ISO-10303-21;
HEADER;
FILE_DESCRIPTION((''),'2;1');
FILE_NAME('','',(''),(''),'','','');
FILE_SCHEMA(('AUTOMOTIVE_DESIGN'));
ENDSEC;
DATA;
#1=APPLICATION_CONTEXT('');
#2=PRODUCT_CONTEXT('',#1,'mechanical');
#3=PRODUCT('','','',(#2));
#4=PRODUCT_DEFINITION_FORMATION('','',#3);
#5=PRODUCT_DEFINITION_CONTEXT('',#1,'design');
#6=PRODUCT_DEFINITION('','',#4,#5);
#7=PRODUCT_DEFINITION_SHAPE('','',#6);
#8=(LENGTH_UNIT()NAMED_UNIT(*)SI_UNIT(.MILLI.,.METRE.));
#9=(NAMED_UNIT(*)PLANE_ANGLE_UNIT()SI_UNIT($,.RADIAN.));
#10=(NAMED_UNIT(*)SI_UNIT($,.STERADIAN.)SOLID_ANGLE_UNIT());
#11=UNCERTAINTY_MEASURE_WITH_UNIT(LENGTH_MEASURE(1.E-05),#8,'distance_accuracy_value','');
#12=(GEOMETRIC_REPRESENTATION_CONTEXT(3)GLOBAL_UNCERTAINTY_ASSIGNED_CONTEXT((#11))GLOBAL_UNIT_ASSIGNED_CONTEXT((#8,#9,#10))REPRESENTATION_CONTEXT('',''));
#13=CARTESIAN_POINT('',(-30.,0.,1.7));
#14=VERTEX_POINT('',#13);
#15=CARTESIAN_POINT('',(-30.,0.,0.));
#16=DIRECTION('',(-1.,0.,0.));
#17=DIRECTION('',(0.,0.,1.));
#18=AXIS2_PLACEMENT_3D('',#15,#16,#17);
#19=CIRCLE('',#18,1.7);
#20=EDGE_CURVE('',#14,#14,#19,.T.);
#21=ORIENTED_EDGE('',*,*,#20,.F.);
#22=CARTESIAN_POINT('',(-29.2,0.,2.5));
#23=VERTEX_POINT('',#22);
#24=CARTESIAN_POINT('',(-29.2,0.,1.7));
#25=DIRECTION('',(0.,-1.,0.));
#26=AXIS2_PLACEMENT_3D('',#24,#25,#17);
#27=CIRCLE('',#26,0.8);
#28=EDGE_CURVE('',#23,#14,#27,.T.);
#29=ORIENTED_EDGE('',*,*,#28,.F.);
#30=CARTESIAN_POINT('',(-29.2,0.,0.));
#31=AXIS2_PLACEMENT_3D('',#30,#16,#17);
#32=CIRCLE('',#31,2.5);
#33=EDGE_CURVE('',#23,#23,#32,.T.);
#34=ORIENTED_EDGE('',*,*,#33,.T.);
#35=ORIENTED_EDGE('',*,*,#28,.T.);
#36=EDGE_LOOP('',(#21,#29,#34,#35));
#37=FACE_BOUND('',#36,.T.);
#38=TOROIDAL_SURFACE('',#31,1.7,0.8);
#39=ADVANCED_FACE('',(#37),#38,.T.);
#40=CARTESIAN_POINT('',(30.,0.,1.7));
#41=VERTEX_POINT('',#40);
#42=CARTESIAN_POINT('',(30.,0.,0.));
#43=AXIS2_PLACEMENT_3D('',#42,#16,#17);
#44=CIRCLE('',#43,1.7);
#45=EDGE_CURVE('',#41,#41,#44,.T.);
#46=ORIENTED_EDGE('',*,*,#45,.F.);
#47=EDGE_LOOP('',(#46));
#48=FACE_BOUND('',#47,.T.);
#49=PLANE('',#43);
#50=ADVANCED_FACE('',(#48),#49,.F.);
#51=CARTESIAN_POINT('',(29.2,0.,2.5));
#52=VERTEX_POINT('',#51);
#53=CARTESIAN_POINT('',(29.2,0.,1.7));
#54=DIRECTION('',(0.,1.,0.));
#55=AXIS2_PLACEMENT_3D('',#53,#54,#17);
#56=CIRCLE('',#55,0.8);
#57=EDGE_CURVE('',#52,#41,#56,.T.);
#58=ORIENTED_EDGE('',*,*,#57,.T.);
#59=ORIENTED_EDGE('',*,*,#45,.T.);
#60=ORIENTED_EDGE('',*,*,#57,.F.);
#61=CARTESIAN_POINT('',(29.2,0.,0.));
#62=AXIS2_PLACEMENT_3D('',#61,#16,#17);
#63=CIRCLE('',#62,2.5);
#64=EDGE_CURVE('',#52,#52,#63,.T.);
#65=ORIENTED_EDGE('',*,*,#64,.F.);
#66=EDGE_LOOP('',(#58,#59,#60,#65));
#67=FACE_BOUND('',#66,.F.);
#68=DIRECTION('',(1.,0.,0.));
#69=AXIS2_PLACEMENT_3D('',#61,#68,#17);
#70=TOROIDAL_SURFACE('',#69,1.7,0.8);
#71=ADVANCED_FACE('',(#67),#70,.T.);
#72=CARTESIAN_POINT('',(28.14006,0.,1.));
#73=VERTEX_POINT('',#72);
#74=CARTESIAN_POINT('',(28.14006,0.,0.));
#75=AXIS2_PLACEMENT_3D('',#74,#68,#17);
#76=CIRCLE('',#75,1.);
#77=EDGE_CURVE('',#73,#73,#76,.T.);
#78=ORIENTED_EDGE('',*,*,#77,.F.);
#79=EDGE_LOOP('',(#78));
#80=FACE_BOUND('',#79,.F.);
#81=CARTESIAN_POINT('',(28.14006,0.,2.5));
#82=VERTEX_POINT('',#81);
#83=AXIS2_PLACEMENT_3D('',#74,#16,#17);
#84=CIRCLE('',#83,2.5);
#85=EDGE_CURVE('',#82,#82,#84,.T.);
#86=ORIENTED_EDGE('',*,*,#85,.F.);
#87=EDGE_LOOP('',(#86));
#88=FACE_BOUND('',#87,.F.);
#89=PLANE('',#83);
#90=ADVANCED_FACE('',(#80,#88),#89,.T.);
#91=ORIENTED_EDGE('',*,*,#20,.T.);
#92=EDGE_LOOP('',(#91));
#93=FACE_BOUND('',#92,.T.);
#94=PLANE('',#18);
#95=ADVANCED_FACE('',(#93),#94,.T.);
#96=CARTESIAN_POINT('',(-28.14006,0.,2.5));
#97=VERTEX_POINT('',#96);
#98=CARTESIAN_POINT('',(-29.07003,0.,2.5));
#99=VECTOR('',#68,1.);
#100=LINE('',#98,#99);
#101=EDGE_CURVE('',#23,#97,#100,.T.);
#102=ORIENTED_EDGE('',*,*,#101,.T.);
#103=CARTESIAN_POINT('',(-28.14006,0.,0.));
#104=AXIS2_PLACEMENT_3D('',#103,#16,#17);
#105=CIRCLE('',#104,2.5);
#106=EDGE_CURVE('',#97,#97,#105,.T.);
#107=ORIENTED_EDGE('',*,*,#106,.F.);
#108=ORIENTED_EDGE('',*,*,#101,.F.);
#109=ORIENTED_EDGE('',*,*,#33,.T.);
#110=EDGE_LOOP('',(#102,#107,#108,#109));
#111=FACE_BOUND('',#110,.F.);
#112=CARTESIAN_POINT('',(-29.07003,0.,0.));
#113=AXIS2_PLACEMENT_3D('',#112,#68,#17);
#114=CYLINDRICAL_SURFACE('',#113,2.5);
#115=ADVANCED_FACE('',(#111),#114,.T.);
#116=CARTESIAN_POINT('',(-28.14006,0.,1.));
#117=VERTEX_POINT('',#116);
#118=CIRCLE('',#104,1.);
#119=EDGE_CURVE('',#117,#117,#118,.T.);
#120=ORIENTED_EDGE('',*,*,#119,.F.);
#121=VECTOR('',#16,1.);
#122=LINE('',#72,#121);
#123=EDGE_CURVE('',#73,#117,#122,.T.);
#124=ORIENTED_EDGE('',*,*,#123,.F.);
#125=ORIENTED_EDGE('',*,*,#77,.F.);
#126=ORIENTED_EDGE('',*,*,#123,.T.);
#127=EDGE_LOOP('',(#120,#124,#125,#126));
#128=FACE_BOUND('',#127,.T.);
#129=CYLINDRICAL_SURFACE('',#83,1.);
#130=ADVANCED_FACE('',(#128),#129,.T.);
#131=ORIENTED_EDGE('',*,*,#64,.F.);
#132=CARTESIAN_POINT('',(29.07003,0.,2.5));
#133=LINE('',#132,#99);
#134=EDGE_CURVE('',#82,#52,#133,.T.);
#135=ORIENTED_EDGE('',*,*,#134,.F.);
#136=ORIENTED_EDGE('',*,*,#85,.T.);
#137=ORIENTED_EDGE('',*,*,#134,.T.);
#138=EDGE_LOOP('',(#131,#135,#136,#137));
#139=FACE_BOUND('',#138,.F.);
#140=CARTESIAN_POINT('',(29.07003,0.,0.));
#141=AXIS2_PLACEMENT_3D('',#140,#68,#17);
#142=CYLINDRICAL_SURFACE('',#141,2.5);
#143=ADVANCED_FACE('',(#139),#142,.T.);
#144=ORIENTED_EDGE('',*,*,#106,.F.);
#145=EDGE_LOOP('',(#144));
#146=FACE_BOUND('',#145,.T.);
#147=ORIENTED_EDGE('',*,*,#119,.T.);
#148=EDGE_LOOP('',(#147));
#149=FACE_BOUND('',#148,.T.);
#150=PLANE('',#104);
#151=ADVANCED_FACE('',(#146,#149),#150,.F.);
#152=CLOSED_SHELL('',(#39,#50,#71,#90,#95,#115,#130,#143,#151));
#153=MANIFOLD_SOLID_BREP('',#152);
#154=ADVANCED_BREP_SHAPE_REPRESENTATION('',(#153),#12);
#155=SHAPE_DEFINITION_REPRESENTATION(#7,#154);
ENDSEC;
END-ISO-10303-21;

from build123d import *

# Parameters (mm, degrees)
F0_W   = 1.85994
F0_H   = 1
F0_H_2 = 1.5
F2_R   = 0.8


with BuildPart() as f1:
    # F0 (on Front) → F1 (revolve)
    with BuildSketch(Plane.XZ):
        Polygon((-28.14006, 0), (0, 0), (28.14006, 0), (28.14006, 1), (-28.14006, 1), align=None)
        with Locations((29.07003, -0.5)):
            Rectangle(F0_W, F0_H)
        with Locations((-29.07003, 0.5)):
            Rectangle(F0_W, F0_H)
        with Locations((29.07003, 1.75)):
            Rectangle(F0_W, F0_H_2)
        with Locations((-29.07003, 1.75)):
            Rectangle(F0_W, F0_H_2)
    revolve(axis=Axis((0, 0, 0), (-1, 0, 0)))

    # F2
    f2_edges = [f1.edges().sort_by_distance(p)[0] for p in [
        (-30, 0, -2.5),
        (30, 0, -2.5),
    ]]
    fillet(f2_edges, radius=F2_R)


solid = f1.part
